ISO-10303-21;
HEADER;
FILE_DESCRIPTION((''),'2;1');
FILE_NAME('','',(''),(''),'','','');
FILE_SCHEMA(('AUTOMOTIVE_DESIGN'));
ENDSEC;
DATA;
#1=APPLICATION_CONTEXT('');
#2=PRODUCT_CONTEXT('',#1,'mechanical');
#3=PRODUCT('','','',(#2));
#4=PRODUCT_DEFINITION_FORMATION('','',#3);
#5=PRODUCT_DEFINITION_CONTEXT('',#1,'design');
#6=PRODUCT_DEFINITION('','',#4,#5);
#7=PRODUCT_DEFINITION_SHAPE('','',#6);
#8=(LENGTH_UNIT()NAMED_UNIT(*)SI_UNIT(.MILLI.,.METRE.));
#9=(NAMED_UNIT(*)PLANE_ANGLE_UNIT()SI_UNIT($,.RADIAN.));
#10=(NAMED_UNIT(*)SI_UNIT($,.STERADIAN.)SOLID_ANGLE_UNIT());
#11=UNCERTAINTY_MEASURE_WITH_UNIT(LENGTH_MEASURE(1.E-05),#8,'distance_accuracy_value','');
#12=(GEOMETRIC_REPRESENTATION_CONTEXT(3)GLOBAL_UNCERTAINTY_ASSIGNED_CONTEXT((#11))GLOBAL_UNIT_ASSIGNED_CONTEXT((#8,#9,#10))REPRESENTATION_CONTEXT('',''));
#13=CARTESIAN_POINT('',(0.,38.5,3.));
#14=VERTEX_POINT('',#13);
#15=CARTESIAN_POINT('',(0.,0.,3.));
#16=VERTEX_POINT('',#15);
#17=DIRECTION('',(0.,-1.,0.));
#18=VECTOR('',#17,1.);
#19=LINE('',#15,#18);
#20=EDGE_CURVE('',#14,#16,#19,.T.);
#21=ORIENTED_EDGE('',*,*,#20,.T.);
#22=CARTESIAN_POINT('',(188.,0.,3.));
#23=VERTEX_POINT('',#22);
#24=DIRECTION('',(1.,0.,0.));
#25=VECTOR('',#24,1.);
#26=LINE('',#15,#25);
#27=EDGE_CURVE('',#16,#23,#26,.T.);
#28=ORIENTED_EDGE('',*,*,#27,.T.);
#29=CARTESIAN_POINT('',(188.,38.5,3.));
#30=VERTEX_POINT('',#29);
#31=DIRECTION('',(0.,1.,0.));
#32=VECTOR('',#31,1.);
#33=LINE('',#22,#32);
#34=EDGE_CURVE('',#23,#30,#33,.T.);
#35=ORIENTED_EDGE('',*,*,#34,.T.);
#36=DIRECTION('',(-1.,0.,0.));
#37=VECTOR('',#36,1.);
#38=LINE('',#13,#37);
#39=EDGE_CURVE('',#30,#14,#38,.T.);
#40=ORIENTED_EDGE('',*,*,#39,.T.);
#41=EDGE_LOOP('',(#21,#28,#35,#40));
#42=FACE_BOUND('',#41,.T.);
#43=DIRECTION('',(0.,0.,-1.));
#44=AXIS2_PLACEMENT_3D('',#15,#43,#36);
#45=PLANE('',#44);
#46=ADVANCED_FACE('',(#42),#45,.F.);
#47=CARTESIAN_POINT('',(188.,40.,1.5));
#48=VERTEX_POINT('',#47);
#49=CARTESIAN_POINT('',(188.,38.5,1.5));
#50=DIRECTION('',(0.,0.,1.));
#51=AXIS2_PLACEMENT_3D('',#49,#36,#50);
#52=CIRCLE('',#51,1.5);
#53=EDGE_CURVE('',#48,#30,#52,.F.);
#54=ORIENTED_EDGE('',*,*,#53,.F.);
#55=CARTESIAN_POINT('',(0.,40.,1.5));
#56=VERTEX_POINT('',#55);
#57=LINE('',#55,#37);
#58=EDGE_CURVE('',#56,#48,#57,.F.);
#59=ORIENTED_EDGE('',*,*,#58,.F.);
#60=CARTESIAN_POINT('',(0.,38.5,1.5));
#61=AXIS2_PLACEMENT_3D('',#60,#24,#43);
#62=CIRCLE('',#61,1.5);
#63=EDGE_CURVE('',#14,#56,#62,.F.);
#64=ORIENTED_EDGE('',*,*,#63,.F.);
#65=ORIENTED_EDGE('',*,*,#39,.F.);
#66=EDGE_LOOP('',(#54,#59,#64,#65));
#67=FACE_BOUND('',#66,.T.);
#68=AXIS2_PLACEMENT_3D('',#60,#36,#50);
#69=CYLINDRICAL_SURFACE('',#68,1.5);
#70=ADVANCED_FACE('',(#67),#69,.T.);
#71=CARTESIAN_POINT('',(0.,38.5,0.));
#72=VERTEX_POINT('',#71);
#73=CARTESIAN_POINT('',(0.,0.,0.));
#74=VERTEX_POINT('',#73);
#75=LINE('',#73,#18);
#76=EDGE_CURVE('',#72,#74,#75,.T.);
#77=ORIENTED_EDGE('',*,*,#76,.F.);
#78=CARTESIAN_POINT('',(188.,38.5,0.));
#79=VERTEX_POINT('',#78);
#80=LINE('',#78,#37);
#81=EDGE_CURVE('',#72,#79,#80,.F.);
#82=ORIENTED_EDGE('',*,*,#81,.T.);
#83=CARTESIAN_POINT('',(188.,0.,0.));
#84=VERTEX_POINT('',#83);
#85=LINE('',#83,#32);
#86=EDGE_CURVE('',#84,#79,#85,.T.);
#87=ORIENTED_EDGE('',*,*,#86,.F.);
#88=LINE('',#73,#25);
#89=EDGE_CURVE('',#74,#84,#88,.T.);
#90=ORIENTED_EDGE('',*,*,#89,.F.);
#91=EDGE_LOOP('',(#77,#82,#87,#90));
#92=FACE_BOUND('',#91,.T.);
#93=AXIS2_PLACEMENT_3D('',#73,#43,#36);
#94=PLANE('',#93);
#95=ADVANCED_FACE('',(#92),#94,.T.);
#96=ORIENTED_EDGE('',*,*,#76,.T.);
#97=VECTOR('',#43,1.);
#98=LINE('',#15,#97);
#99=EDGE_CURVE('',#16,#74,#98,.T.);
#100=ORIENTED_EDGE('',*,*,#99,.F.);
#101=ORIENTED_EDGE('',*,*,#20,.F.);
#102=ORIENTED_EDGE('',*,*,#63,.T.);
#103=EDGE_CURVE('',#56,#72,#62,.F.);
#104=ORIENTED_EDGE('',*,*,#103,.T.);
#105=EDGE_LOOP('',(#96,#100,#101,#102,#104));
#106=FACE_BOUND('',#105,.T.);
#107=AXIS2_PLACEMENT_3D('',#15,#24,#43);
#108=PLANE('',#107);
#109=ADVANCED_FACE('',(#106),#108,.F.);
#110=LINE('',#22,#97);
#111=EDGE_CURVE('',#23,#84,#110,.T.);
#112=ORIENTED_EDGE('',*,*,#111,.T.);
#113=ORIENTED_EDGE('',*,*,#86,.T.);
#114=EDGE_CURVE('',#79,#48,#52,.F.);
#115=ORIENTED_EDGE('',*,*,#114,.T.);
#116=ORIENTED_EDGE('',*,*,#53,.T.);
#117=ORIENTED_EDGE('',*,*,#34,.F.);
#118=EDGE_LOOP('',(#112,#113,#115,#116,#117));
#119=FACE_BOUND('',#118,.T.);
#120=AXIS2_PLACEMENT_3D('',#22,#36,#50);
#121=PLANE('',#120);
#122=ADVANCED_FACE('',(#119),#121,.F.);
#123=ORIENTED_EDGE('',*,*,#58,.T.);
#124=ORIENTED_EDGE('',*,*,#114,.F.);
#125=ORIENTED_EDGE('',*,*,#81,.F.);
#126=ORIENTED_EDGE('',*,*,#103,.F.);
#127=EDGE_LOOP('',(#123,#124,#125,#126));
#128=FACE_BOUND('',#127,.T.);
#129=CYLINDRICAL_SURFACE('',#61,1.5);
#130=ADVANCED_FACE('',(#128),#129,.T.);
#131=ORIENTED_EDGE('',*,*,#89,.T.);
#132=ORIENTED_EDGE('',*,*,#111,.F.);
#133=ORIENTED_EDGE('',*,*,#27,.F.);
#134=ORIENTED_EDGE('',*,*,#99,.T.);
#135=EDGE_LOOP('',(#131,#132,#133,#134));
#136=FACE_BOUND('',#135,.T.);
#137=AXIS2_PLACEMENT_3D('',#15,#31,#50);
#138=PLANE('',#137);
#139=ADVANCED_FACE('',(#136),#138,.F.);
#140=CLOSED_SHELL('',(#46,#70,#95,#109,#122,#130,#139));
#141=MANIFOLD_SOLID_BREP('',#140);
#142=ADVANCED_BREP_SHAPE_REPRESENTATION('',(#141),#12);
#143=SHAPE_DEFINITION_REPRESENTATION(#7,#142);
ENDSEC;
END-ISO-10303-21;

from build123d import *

# Parameters (mm, degrees)
ESQUISSE1_W        = 188
ESQUISSE1_H        = 40
BOSS_EXTRU_1_DEPTH = 3
CONG_1_R           = 1.5
CONG_3_R           = 1.5


with BuildPart() as part:
    # Esquisse1 → Boss.-Extru.1 (new body)
    with BuildSketch(Plane.XY):
        with Locations((94, 20)):
            Rectangle(ESQUISSE1_W, ESQUISSE1_H)
    extrude(amount=BOSS_EXTRU_1_DEPTH)

    # Congé1
    cong_1_edges = [part.edges().sort_by_distance(p)[0] for p in [
        (94, 40, 3),
    ]]
    fillet(cong_1_edges, radius=CONG_1_R)

    # Congé3
    cong_3_edges = [part.edges().sort_by_distance(p)[0] for p in [
        (94, 40, 0),
    ]]
    fillet(cong_3_edges, radius=CONG_3_R - 0.0001)  # a hair under: the kernel refuses the full size


solid = part.part
